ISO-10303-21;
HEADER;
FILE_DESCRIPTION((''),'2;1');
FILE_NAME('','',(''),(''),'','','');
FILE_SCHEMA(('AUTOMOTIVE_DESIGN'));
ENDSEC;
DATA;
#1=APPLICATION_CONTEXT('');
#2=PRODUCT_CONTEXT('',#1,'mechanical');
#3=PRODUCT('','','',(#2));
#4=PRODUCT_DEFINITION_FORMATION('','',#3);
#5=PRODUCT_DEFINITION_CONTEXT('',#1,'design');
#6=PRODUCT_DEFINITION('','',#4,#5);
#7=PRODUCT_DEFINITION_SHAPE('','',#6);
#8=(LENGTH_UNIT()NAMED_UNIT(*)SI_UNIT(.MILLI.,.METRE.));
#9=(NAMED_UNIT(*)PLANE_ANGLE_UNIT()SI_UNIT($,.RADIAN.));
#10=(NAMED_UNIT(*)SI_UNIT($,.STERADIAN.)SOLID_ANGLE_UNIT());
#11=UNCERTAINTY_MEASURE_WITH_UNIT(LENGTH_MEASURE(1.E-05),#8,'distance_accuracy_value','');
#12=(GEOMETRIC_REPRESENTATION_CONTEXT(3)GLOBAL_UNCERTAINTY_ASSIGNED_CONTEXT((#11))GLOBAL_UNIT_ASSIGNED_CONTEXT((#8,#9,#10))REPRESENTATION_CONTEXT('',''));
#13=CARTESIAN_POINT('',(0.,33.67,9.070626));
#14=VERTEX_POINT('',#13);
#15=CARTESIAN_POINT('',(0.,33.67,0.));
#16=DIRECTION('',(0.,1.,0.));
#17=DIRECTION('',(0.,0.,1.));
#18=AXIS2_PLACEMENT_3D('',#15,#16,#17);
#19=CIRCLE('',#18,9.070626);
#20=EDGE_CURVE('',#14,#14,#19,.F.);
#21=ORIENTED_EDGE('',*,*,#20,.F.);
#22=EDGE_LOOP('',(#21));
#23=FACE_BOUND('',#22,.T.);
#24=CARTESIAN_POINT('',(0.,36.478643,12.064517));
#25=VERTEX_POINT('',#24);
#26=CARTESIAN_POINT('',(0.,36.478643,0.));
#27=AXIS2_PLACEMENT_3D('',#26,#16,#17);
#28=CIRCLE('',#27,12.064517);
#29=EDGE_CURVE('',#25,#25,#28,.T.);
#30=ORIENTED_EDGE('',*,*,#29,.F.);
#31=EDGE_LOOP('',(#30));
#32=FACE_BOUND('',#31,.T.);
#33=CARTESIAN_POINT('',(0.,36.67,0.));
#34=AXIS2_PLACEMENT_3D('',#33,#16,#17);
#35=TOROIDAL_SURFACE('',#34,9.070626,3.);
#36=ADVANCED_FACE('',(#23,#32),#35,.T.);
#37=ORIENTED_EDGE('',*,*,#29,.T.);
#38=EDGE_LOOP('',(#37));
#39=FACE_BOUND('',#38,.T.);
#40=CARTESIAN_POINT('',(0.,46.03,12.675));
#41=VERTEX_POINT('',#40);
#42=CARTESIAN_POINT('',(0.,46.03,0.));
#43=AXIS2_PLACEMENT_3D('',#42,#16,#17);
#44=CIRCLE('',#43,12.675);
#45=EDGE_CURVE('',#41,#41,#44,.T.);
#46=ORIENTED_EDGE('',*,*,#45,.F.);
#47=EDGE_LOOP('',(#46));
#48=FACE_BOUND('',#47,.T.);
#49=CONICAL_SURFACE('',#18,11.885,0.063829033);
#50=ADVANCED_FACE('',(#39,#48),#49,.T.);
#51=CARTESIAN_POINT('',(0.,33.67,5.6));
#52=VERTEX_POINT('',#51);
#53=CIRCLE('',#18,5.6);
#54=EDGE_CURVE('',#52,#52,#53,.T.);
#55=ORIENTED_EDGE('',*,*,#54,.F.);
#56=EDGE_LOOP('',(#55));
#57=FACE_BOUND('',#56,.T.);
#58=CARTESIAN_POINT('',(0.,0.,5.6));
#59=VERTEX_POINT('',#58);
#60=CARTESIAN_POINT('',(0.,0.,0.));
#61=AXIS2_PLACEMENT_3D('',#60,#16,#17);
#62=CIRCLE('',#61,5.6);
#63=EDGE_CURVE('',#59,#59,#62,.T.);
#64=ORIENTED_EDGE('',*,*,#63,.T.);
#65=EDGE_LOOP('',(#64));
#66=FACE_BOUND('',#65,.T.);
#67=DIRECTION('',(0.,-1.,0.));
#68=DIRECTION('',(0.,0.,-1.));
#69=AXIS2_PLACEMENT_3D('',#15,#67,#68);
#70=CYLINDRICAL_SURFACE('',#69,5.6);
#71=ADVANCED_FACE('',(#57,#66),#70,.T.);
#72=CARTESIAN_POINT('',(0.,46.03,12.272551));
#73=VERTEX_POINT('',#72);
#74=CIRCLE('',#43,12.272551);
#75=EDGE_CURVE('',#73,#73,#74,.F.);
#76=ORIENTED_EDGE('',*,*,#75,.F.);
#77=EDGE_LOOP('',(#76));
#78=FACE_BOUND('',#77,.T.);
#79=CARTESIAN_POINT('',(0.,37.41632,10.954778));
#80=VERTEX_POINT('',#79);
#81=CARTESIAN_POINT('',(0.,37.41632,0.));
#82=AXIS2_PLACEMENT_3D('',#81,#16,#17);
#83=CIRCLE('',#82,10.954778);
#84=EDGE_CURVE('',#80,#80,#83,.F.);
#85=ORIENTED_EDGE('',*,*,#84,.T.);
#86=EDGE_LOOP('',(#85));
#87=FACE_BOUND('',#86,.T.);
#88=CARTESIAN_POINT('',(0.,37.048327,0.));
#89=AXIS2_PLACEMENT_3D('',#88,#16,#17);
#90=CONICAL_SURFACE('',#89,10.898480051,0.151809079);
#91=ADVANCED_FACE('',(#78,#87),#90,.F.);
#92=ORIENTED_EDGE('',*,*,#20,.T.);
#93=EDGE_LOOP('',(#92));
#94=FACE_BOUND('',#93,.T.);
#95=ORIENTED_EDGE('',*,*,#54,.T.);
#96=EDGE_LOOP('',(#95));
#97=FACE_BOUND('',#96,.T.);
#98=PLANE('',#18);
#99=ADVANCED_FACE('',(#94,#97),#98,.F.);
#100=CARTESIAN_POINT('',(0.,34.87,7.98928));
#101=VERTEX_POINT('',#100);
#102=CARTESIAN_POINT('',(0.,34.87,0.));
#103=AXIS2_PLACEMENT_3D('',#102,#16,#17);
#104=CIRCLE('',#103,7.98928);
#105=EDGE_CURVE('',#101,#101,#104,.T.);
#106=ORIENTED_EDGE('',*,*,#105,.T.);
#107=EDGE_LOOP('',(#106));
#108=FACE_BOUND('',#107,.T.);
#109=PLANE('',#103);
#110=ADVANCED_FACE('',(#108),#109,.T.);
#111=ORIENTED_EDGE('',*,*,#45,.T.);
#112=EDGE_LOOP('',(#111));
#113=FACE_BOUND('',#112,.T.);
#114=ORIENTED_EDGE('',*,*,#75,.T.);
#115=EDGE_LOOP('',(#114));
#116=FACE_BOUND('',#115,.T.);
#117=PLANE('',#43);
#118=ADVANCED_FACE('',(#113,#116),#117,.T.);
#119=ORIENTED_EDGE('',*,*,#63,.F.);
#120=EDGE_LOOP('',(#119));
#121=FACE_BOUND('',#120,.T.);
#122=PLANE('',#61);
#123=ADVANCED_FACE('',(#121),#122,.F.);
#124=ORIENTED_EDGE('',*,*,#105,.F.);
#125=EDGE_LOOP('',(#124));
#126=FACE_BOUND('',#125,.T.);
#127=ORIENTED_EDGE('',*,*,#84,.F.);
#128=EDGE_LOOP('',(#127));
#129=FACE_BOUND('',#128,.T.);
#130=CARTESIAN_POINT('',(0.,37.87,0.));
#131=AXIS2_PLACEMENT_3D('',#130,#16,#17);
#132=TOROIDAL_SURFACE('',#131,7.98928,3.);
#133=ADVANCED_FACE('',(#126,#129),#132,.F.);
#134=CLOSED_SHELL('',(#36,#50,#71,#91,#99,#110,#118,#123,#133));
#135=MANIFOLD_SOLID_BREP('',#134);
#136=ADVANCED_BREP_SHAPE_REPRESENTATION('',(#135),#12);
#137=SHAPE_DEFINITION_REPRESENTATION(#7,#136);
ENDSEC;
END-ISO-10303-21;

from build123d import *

# Parameters (mm, degrees)
SKETCH1_R           = 5.6
BOSS_EXTRUDE1_DEPTH = 33.67
SKETCH2_R           = 11.885
SKETCH3_R           = 12.675
FILLET1_R           = 3
CHAMFER1_SIZE       = 0.8
CHAMFER1_SIZE2      = 9
FILLET2_R           = 3


# Read off the part's stored shape, not the designer's step: Shell1
with BuildPart() as part:
    # Sketch1 → Boss-Extrude1 (new body)
    with BuildSketch(Plane(origin=(0, 0, 0), x_dir=(1, 0, 0), z_dir=(0, 1, 0))):
        with Locations(Location((0, 0, 0), (0, 0, 270))):
            Circle(SKETCH1_R)
    extrude(amount=BOSS_EXTRUDE1_DEPTH)

    # Sketch2 → Loft1 section 0
    with BuildSketch(Plane(origin=(0, 33.67, 0), x_dir=(1, 0, 0), z_dir=(0, 1, 0))):
        Circle(SKETCH2_R)
    # Sketch3 → Loft1 section 1
    with BuildSketch(Plane(origin=(0, 46.03, 0), x_dir=(1, 0, 0), z_dir=(0, 1, 0))):
        Circle(SKETCH3_R)
    loft()

    # Shell1 outline → Shell1 (revolve, cut)
    with BuildSketch(Plane.XY):
        Polygon((0, 46.03), (0, 34.87), (10.759250385, 34.87), (11.472551356, 46.03), align=None)
    revolve(axis=Axis((0, 0, 0), (0, 1, 0)), mode=Mode.SUBTRACT)

    # Fillet1
    fillet1_edges = [part.edges().sort_by_distance(p)[0] for p in [
        (-11.885, 33.67, 0),
    ]]
    fillet(fillet1_edges, radius=FILLET1_R)

    # Chamfer1
    chamfer1_edges = [part.edges().sort_by_distance(p)[0] for p in [
        (-11.472551356, 46.03, 0),
    ]]
    chamfer1_side = [part.faces().sort_by_distance(p)[0] for p in [
        (-12.316496862, 46.03, 0),
    ]]
    chamfer(chamfer1_edges, length=CHAMFER1_SIZE, length2=CHAMFER1_SIZE2, reference=chamfer1_side[0])

    # Fillet2
    fillet2_edges = [part.edges().sort_by_distance(p)[0] for p in [
        (-10.759250385, 34.87, 0),
    ]]
    fillet(fillet2_edges, radius=FILLET2_R)


solid = part.part
